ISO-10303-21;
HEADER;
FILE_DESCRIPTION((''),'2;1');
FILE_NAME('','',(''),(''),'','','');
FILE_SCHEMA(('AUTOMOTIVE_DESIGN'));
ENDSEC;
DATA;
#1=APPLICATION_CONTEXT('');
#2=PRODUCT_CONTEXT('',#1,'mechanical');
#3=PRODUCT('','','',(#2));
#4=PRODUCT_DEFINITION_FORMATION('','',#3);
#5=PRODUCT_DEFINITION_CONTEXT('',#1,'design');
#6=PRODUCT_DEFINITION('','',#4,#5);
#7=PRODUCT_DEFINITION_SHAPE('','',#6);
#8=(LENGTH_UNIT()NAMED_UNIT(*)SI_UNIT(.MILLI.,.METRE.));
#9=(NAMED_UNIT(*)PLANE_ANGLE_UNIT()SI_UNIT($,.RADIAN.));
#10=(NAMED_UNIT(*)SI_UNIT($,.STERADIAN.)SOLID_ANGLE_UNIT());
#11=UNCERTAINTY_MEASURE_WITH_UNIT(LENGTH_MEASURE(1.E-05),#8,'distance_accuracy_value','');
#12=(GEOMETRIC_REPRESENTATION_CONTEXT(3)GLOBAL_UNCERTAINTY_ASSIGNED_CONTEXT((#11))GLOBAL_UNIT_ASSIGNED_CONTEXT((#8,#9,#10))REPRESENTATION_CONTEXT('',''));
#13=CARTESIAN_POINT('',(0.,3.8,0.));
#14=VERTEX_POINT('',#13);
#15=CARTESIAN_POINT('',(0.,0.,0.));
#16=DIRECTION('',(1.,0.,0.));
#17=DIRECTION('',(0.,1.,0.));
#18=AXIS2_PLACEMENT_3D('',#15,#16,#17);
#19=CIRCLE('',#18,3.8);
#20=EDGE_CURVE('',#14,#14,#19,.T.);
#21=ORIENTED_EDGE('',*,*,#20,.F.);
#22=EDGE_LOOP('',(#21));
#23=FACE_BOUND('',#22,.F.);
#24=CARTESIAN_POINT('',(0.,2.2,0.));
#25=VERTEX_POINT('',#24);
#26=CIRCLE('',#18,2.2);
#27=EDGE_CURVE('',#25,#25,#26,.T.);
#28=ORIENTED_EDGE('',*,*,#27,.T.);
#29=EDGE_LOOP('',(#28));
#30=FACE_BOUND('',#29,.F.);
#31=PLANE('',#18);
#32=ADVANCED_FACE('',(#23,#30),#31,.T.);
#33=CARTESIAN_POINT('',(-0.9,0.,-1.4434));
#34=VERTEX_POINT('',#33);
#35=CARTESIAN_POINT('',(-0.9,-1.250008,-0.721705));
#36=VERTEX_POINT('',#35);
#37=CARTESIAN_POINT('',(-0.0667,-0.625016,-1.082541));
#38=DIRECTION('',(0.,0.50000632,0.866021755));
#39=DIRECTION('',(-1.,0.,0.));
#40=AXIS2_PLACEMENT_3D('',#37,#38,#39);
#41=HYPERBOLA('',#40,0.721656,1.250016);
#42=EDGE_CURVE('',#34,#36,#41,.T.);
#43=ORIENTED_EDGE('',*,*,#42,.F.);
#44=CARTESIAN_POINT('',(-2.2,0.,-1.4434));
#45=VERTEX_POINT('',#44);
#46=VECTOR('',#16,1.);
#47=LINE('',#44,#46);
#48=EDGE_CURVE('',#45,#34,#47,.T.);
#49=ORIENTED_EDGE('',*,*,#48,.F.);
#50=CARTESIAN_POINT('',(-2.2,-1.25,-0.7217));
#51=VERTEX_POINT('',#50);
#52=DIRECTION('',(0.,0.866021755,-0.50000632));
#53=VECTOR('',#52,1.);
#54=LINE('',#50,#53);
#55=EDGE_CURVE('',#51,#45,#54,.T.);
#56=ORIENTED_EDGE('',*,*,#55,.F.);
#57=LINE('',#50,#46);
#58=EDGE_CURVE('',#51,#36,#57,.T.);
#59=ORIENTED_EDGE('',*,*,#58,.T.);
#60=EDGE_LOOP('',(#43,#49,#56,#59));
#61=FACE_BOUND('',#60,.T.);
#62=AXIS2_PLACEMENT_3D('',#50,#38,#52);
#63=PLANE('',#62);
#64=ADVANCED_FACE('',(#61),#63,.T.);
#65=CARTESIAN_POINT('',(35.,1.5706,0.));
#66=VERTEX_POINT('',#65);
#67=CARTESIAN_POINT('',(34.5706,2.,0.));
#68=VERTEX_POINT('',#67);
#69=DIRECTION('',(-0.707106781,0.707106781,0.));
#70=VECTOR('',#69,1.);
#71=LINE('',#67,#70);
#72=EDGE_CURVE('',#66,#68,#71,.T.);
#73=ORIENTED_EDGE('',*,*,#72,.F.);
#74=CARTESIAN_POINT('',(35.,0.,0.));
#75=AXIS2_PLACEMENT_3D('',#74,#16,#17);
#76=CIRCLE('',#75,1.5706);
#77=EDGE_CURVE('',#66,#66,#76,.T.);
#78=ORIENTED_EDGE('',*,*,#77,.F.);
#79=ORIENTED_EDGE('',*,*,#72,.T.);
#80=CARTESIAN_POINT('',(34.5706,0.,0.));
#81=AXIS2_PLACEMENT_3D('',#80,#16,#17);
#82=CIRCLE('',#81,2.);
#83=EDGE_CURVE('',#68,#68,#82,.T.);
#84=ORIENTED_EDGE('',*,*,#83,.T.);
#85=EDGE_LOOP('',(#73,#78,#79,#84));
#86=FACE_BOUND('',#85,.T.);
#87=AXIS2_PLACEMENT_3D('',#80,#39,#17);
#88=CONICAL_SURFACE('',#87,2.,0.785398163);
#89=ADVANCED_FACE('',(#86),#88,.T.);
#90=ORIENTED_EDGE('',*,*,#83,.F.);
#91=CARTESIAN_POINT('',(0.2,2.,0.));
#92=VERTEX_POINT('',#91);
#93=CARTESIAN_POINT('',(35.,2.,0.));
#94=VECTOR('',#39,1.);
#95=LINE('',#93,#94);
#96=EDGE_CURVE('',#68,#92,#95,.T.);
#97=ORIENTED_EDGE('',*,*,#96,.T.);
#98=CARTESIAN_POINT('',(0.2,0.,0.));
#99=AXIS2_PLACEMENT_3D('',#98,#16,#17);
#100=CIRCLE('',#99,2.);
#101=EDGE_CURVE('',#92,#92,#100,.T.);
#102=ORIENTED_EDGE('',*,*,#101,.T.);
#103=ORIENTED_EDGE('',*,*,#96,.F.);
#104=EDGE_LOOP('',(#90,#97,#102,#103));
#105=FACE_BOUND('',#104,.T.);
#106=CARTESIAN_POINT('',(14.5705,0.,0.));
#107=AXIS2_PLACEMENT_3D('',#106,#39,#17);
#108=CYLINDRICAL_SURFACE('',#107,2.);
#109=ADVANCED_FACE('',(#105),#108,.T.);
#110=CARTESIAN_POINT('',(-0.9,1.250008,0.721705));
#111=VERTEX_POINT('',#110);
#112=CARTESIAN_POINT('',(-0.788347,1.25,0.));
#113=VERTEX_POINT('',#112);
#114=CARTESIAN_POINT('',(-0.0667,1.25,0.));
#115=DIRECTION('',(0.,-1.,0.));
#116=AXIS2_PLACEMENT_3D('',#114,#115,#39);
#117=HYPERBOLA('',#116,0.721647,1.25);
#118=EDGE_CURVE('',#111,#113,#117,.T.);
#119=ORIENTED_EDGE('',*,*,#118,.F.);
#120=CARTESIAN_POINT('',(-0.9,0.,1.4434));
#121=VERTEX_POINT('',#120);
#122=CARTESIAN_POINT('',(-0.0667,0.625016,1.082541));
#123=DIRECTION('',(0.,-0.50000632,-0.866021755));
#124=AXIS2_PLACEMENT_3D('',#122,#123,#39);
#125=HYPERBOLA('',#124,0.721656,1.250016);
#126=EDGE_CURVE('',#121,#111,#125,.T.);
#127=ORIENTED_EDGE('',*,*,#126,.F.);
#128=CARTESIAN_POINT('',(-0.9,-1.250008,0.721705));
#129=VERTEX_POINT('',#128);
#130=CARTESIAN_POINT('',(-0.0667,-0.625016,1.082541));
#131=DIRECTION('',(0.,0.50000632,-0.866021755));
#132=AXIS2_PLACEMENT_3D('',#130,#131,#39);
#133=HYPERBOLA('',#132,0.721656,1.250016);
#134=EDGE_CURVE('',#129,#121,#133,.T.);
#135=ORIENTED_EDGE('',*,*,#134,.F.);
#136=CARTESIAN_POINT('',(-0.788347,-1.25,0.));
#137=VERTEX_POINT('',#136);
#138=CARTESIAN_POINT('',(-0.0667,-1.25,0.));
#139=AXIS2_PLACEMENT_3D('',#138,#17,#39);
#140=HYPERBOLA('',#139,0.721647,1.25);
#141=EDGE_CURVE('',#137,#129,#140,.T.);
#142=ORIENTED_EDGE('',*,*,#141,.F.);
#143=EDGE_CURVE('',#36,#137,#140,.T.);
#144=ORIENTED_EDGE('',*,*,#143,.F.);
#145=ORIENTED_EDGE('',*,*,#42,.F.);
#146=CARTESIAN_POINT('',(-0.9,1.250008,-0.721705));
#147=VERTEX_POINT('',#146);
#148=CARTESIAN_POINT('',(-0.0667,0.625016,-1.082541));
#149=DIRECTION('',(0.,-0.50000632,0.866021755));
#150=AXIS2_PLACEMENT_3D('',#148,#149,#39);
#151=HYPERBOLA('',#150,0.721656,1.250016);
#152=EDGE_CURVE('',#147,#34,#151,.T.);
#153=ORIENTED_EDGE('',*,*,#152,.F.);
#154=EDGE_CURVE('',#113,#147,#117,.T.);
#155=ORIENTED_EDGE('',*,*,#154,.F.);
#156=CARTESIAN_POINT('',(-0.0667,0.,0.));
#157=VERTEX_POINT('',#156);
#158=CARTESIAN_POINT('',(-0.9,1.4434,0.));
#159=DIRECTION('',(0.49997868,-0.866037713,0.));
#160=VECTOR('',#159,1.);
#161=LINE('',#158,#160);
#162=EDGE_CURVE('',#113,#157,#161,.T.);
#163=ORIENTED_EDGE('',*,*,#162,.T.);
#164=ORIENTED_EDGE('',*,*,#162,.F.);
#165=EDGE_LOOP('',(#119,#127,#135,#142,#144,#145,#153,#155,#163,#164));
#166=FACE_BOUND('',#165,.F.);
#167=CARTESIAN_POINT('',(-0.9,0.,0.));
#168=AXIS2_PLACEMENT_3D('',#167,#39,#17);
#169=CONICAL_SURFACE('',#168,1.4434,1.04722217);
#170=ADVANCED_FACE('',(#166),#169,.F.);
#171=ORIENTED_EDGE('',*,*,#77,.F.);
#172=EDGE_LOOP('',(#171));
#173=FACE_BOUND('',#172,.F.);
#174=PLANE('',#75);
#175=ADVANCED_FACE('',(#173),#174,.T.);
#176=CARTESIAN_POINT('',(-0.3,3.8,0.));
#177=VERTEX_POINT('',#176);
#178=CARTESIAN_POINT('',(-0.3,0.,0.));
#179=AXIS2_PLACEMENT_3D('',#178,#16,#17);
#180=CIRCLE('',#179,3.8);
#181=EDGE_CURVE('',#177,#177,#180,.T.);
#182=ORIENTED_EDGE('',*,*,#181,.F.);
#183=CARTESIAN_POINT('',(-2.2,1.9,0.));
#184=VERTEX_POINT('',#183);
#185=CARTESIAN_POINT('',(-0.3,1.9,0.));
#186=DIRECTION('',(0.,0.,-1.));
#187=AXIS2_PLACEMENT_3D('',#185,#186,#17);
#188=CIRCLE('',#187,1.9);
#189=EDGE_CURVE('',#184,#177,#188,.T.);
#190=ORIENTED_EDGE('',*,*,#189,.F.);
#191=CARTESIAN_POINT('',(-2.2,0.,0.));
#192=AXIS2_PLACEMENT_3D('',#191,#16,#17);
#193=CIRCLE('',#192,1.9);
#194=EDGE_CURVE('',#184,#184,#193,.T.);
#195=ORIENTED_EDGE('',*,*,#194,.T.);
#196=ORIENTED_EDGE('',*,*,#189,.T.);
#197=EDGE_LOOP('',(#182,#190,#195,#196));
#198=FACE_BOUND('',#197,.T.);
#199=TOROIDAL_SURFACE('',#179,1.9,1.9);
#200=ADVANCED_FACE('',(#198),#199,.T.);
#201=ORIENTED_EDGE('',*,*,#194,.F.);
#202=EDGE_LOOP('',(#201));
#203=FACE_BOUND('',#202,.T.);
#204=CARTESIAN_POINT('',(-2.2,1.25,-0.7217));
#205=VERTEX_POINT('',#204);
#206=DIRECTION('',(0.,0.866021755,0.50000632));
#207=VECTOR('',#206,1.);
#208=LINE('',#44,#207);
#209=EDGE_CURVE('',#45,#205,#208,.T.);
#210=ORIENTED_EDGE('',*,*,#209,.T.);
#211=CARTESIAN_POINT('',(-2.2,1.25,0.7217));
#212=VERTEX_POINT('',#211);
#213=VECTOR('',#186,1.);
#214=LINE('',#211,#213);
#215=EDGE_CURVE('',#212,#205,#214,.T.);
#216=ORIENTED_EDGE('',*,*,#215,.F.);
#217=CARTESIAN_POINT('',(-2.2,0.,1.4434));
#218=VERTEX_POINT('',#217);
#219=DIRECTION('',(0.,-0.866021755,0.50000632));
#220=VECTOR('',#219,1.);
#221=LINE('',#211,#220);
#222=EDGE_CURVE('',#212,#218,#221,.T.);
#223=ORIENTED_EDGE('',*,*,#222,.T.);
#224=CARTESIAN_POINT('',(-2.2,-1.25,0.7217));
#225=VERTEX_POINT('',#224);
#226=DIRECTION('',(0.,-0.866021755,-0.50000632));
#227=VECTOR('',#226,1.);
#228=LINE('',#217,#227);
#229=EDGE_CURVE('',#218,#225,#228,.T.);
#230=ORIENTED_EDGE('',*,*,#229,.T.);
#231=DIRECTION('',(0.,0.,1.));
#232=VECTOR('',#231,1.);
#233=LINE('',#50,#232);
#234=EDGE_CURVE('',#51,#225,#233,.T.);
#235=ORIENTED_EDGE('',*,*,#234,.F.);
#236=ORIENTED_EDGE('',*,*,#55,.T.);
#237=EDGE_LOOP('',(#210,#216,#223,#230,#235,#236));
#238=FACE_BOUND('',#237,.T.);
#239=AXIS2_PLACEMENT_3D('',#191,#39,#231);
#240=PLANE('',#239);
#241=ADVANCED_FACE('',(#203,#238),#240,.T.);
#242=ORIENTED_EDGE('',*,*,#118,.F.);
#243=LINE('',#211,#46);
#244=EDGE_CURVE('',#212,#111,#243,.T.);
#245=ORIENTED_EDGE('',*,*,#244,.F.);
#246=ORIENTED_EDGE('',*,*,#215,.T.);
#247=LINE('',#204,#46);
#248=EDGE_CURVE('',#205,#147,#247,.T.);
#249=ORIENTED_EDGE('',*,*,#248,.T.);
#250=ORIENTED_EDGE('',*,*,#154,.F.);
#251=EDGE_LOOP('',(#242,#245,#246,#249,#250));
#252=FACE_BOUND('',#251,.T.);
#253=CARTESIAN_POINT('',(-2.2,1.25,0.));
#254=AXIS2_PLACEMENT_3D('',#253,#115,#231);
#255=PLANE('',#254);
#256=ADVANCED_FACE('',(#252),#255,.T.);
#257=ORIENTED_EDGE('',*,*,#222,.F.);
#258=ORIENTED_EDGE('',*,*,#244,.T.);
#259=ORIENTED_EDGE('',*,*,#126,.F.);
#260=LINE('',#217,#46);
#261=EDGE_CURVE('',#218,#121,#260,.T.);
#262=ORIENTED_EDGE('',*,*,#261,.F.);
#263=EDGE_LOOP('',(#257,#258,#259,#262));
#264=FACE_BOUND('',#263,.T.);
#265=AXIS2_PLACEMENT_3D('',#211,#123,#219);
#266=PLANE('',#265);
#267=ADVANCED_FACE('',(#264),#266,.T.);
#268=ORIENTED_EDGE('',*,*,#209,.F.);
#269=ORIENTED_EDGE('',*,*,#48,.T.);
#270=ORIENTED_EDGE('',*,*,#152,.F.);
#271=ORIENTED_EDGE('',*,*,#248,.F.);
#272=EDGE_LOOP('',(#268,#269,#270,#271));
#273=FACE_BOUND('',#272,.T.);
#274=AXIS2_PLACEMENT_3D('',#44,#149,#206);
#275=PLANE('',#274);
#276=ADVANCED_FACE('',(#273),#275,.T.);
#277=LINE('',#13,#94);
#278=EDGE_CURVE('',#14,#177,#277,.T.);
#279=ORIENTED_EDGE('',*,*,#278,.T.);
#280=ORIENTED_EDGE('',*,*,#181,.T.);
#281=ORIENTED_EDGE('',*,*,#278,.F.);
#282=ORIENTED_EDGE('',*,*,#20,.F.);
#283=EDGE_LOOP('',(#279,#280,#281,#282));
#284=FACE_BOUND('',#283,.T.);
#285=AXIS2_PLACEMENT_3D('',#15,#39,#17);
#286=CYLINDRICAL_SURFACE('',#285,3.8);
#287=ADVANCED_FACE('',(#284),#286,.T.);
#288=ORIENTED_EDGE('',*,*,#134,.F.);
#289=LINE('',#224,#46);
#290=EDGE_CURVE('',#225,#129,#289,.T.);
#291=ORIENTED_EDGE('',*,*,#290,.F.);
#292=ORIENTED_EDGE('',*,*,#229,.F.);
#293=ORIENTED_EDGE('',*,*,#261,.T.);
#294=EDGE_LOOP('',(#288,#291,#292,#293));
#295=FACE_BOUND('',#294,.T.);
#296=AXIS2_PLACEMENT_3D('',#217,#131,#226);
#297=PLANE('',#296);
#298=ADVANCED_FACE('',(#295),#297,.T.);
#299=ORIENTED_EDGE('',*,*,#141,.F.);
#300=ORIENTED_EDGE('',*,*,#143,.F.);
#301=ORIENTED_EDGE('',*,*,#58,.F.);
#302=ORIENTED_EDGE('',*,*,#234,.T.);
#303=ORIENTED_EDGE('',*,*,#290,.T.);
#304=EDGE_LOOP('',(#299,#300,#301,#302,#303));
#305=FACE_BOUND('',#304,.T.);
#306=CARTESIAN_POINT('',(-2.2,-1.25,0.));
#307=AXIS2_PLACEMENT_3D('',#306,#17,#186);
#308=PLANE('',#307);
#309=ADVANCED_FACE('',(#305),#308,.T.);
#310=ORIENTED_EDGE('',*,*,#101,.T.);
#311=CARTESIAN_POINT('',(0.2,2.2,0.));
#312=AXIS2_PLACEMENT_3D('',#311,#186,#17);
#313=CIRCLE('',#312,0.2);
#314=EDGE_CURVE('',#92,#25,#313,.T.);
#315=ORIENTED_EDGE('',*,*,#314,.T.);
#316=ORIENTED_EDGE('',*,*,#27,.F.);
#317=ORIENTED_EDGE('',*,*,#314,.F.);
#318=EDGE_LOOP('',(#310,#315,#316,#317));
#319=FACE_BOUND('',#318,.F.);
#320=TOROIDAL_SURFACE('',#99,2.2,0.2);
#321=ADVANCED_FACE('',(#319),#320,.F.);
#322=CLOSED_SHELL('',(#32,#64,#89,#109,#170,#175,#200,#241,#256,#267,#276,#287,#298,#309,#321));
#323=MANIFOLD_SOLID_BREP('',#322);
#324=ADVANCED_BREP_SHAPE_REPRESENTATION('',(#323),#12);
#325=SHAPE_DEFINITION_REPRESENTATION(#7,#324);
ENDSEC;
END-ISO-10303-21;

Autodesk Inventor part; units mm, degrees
ref_plane "YZ Plane" through (0, 0, 0) normal (1, 0, 0) x (0, 1, 0)
ref_plane "XZ Plane" through (0, 0, 0) normal (0, 1, 0) x (-1, 0, 0)
sketch "Sketch1" plane through (0, 0, 0) normal (0, 0, 1) x (1, 0, 0)
  line L0 (-0.0667, 0) -> (35, 0)
  line L1 (35, 0) -> (35, 2)
  line L2 (35, 2) -> (15, 2)
  line L3 (15, 2) -> (14.5705, 2)
  line L4 (14.5705, 2) -> (0, 2)
  line L5 (0, 2) -> (0, 3.8)
  line L6 (0, 3.8) -> (-2.2, 3.8)
  line L7 (-2.2, 3.8) -> (-2.2, 1.4434)
  line L8 (-2.2, 1.4434) -> (-0.9, 1.4434)
  line L9 (-0.9, 1.4434) -> (-0.0667, 0)
  line L10 (-9.64, 0) -> (42.44, 0) projected
  line L11 (0, -0.76) -> (0, 4.56) projected
  line L12 (15, 2) -> (0, 2) construction
  dimension "d1" = 20
  dimension "d2" = 0.4295
  dimension "d3" = 2.2
  dimension "d4" = 1.3
  dimension "d5" = 60
  dimension "d6" = 4
  dimension "d7" = 4
  dimension "d8" = 2.8868
  dimension "d9" = 7.6
  dimension "d26" = 35
revolve "Body" add sketch "Sketch1" angle 360 about axis through (-0.0667, 0, 0) along (1, 0, 0)
sketch "Sketch2" plane through (-2.2, 0, 0) normal (-1, 0, 0) x (0, 0, 1)
  circle A0 centre (0, 0) radius 1.4434 projected
  line L0 (0, -5.32) -> (0, 5.32) projected
  line L1 (-5.32, 0) -> (5.32, 0) projected
  line L2 (1.4434, 0) -> (0.7217, -1.25)
  line L3 (0.7217, -1.25) -> (-0.7217, -1.25)
  line L4 (-0.7217, -1.25) -> (-1.4434, 0)
  line L5 (-1.4434, 0) -> (-0.7217, 1.25)
  line L6 (-0.7217, 1.25) -> (0.7217, 1.25)
  line L7 (0.7217, 1.25) -> (1.4434, 0)
extrude "Slot" add sketch "Sketch2" against normal up to next contours L7 A0 | A0 L2 | L6 L0 A0 | A0 L0 L3 | L0 L6 A0 | A0 L3 L0 | L4 A0 | A0 L5
fillet "Fillet1" radius 1.9 1 edges at (-2.2, -3.8, 0)
thread "Thread" size "M4x0.7" class "6g" standard "ISO Metric profile" length 20
chamfer "Chamfer1" distance 0.4294 distance2 0.4294 1 edges at (35, -2, 0) measured on face at (35, 0.0262, -0.4421)
ref_plane "Work Plane1" through (29, 0, 0) normal (0, -1, 0) x (1, 0, 0)
fillet "Fillet2" radius 0.2 1 edges at (0, -2, 0)
equation "\"d30\" = R"
equation "\"d17\" = RR"
equation "\"d13\" = GEL"
equation "\"d15\" = -0.5 * SPD + 0.5 * GD"
equation "\"d16\" = GUL"
equation "\"d1\" = GEL"
equation "\"d3\" = KOH"
equation "\"d4\" = INTI"
equation "\"d6\" = GD"
equation "\"d7\" = BDM"
equation "\"d8\" = 1.1547 * SW"
equation "\"d9\" = KOD"
equation "\"d26\" = NLG"
equation "\"GD\" = NND"
equation "\"NLG\" = 35"
equation "\"GEL\" = 20"
equation "\"KOD\" = 7.6"
equation "\"KOH\" = 2.2"
equation "\"INTI\" = 1.3"
equation "\"GAL\" = 0.61345 * PTC"
equation "\"GUL\" = 0.61345 * PTC"
equation "\"BDM\" = NND"
equation "\"SW\" = 2.5"
equation "\"RR\" = 1.9"
equation "\"SPD\" = NND - 1.2269 * PTC"
equation "\"R\" = 0.2"
equation "\"TOA\" = 30deg"
equation "\"GD1\" = THREADDIA - 1.2269 * PTC"
equation "\"THREADDIA\" = 4"
equation "\"PTC\" = 0.7"
equation "\"NND\" = 4"
equation "\"KOH1\" = 0.3"
equation "\"E0\" = 2.873"
properties part number "ISO 7380-1 - M4 x 35" material "Steel"
